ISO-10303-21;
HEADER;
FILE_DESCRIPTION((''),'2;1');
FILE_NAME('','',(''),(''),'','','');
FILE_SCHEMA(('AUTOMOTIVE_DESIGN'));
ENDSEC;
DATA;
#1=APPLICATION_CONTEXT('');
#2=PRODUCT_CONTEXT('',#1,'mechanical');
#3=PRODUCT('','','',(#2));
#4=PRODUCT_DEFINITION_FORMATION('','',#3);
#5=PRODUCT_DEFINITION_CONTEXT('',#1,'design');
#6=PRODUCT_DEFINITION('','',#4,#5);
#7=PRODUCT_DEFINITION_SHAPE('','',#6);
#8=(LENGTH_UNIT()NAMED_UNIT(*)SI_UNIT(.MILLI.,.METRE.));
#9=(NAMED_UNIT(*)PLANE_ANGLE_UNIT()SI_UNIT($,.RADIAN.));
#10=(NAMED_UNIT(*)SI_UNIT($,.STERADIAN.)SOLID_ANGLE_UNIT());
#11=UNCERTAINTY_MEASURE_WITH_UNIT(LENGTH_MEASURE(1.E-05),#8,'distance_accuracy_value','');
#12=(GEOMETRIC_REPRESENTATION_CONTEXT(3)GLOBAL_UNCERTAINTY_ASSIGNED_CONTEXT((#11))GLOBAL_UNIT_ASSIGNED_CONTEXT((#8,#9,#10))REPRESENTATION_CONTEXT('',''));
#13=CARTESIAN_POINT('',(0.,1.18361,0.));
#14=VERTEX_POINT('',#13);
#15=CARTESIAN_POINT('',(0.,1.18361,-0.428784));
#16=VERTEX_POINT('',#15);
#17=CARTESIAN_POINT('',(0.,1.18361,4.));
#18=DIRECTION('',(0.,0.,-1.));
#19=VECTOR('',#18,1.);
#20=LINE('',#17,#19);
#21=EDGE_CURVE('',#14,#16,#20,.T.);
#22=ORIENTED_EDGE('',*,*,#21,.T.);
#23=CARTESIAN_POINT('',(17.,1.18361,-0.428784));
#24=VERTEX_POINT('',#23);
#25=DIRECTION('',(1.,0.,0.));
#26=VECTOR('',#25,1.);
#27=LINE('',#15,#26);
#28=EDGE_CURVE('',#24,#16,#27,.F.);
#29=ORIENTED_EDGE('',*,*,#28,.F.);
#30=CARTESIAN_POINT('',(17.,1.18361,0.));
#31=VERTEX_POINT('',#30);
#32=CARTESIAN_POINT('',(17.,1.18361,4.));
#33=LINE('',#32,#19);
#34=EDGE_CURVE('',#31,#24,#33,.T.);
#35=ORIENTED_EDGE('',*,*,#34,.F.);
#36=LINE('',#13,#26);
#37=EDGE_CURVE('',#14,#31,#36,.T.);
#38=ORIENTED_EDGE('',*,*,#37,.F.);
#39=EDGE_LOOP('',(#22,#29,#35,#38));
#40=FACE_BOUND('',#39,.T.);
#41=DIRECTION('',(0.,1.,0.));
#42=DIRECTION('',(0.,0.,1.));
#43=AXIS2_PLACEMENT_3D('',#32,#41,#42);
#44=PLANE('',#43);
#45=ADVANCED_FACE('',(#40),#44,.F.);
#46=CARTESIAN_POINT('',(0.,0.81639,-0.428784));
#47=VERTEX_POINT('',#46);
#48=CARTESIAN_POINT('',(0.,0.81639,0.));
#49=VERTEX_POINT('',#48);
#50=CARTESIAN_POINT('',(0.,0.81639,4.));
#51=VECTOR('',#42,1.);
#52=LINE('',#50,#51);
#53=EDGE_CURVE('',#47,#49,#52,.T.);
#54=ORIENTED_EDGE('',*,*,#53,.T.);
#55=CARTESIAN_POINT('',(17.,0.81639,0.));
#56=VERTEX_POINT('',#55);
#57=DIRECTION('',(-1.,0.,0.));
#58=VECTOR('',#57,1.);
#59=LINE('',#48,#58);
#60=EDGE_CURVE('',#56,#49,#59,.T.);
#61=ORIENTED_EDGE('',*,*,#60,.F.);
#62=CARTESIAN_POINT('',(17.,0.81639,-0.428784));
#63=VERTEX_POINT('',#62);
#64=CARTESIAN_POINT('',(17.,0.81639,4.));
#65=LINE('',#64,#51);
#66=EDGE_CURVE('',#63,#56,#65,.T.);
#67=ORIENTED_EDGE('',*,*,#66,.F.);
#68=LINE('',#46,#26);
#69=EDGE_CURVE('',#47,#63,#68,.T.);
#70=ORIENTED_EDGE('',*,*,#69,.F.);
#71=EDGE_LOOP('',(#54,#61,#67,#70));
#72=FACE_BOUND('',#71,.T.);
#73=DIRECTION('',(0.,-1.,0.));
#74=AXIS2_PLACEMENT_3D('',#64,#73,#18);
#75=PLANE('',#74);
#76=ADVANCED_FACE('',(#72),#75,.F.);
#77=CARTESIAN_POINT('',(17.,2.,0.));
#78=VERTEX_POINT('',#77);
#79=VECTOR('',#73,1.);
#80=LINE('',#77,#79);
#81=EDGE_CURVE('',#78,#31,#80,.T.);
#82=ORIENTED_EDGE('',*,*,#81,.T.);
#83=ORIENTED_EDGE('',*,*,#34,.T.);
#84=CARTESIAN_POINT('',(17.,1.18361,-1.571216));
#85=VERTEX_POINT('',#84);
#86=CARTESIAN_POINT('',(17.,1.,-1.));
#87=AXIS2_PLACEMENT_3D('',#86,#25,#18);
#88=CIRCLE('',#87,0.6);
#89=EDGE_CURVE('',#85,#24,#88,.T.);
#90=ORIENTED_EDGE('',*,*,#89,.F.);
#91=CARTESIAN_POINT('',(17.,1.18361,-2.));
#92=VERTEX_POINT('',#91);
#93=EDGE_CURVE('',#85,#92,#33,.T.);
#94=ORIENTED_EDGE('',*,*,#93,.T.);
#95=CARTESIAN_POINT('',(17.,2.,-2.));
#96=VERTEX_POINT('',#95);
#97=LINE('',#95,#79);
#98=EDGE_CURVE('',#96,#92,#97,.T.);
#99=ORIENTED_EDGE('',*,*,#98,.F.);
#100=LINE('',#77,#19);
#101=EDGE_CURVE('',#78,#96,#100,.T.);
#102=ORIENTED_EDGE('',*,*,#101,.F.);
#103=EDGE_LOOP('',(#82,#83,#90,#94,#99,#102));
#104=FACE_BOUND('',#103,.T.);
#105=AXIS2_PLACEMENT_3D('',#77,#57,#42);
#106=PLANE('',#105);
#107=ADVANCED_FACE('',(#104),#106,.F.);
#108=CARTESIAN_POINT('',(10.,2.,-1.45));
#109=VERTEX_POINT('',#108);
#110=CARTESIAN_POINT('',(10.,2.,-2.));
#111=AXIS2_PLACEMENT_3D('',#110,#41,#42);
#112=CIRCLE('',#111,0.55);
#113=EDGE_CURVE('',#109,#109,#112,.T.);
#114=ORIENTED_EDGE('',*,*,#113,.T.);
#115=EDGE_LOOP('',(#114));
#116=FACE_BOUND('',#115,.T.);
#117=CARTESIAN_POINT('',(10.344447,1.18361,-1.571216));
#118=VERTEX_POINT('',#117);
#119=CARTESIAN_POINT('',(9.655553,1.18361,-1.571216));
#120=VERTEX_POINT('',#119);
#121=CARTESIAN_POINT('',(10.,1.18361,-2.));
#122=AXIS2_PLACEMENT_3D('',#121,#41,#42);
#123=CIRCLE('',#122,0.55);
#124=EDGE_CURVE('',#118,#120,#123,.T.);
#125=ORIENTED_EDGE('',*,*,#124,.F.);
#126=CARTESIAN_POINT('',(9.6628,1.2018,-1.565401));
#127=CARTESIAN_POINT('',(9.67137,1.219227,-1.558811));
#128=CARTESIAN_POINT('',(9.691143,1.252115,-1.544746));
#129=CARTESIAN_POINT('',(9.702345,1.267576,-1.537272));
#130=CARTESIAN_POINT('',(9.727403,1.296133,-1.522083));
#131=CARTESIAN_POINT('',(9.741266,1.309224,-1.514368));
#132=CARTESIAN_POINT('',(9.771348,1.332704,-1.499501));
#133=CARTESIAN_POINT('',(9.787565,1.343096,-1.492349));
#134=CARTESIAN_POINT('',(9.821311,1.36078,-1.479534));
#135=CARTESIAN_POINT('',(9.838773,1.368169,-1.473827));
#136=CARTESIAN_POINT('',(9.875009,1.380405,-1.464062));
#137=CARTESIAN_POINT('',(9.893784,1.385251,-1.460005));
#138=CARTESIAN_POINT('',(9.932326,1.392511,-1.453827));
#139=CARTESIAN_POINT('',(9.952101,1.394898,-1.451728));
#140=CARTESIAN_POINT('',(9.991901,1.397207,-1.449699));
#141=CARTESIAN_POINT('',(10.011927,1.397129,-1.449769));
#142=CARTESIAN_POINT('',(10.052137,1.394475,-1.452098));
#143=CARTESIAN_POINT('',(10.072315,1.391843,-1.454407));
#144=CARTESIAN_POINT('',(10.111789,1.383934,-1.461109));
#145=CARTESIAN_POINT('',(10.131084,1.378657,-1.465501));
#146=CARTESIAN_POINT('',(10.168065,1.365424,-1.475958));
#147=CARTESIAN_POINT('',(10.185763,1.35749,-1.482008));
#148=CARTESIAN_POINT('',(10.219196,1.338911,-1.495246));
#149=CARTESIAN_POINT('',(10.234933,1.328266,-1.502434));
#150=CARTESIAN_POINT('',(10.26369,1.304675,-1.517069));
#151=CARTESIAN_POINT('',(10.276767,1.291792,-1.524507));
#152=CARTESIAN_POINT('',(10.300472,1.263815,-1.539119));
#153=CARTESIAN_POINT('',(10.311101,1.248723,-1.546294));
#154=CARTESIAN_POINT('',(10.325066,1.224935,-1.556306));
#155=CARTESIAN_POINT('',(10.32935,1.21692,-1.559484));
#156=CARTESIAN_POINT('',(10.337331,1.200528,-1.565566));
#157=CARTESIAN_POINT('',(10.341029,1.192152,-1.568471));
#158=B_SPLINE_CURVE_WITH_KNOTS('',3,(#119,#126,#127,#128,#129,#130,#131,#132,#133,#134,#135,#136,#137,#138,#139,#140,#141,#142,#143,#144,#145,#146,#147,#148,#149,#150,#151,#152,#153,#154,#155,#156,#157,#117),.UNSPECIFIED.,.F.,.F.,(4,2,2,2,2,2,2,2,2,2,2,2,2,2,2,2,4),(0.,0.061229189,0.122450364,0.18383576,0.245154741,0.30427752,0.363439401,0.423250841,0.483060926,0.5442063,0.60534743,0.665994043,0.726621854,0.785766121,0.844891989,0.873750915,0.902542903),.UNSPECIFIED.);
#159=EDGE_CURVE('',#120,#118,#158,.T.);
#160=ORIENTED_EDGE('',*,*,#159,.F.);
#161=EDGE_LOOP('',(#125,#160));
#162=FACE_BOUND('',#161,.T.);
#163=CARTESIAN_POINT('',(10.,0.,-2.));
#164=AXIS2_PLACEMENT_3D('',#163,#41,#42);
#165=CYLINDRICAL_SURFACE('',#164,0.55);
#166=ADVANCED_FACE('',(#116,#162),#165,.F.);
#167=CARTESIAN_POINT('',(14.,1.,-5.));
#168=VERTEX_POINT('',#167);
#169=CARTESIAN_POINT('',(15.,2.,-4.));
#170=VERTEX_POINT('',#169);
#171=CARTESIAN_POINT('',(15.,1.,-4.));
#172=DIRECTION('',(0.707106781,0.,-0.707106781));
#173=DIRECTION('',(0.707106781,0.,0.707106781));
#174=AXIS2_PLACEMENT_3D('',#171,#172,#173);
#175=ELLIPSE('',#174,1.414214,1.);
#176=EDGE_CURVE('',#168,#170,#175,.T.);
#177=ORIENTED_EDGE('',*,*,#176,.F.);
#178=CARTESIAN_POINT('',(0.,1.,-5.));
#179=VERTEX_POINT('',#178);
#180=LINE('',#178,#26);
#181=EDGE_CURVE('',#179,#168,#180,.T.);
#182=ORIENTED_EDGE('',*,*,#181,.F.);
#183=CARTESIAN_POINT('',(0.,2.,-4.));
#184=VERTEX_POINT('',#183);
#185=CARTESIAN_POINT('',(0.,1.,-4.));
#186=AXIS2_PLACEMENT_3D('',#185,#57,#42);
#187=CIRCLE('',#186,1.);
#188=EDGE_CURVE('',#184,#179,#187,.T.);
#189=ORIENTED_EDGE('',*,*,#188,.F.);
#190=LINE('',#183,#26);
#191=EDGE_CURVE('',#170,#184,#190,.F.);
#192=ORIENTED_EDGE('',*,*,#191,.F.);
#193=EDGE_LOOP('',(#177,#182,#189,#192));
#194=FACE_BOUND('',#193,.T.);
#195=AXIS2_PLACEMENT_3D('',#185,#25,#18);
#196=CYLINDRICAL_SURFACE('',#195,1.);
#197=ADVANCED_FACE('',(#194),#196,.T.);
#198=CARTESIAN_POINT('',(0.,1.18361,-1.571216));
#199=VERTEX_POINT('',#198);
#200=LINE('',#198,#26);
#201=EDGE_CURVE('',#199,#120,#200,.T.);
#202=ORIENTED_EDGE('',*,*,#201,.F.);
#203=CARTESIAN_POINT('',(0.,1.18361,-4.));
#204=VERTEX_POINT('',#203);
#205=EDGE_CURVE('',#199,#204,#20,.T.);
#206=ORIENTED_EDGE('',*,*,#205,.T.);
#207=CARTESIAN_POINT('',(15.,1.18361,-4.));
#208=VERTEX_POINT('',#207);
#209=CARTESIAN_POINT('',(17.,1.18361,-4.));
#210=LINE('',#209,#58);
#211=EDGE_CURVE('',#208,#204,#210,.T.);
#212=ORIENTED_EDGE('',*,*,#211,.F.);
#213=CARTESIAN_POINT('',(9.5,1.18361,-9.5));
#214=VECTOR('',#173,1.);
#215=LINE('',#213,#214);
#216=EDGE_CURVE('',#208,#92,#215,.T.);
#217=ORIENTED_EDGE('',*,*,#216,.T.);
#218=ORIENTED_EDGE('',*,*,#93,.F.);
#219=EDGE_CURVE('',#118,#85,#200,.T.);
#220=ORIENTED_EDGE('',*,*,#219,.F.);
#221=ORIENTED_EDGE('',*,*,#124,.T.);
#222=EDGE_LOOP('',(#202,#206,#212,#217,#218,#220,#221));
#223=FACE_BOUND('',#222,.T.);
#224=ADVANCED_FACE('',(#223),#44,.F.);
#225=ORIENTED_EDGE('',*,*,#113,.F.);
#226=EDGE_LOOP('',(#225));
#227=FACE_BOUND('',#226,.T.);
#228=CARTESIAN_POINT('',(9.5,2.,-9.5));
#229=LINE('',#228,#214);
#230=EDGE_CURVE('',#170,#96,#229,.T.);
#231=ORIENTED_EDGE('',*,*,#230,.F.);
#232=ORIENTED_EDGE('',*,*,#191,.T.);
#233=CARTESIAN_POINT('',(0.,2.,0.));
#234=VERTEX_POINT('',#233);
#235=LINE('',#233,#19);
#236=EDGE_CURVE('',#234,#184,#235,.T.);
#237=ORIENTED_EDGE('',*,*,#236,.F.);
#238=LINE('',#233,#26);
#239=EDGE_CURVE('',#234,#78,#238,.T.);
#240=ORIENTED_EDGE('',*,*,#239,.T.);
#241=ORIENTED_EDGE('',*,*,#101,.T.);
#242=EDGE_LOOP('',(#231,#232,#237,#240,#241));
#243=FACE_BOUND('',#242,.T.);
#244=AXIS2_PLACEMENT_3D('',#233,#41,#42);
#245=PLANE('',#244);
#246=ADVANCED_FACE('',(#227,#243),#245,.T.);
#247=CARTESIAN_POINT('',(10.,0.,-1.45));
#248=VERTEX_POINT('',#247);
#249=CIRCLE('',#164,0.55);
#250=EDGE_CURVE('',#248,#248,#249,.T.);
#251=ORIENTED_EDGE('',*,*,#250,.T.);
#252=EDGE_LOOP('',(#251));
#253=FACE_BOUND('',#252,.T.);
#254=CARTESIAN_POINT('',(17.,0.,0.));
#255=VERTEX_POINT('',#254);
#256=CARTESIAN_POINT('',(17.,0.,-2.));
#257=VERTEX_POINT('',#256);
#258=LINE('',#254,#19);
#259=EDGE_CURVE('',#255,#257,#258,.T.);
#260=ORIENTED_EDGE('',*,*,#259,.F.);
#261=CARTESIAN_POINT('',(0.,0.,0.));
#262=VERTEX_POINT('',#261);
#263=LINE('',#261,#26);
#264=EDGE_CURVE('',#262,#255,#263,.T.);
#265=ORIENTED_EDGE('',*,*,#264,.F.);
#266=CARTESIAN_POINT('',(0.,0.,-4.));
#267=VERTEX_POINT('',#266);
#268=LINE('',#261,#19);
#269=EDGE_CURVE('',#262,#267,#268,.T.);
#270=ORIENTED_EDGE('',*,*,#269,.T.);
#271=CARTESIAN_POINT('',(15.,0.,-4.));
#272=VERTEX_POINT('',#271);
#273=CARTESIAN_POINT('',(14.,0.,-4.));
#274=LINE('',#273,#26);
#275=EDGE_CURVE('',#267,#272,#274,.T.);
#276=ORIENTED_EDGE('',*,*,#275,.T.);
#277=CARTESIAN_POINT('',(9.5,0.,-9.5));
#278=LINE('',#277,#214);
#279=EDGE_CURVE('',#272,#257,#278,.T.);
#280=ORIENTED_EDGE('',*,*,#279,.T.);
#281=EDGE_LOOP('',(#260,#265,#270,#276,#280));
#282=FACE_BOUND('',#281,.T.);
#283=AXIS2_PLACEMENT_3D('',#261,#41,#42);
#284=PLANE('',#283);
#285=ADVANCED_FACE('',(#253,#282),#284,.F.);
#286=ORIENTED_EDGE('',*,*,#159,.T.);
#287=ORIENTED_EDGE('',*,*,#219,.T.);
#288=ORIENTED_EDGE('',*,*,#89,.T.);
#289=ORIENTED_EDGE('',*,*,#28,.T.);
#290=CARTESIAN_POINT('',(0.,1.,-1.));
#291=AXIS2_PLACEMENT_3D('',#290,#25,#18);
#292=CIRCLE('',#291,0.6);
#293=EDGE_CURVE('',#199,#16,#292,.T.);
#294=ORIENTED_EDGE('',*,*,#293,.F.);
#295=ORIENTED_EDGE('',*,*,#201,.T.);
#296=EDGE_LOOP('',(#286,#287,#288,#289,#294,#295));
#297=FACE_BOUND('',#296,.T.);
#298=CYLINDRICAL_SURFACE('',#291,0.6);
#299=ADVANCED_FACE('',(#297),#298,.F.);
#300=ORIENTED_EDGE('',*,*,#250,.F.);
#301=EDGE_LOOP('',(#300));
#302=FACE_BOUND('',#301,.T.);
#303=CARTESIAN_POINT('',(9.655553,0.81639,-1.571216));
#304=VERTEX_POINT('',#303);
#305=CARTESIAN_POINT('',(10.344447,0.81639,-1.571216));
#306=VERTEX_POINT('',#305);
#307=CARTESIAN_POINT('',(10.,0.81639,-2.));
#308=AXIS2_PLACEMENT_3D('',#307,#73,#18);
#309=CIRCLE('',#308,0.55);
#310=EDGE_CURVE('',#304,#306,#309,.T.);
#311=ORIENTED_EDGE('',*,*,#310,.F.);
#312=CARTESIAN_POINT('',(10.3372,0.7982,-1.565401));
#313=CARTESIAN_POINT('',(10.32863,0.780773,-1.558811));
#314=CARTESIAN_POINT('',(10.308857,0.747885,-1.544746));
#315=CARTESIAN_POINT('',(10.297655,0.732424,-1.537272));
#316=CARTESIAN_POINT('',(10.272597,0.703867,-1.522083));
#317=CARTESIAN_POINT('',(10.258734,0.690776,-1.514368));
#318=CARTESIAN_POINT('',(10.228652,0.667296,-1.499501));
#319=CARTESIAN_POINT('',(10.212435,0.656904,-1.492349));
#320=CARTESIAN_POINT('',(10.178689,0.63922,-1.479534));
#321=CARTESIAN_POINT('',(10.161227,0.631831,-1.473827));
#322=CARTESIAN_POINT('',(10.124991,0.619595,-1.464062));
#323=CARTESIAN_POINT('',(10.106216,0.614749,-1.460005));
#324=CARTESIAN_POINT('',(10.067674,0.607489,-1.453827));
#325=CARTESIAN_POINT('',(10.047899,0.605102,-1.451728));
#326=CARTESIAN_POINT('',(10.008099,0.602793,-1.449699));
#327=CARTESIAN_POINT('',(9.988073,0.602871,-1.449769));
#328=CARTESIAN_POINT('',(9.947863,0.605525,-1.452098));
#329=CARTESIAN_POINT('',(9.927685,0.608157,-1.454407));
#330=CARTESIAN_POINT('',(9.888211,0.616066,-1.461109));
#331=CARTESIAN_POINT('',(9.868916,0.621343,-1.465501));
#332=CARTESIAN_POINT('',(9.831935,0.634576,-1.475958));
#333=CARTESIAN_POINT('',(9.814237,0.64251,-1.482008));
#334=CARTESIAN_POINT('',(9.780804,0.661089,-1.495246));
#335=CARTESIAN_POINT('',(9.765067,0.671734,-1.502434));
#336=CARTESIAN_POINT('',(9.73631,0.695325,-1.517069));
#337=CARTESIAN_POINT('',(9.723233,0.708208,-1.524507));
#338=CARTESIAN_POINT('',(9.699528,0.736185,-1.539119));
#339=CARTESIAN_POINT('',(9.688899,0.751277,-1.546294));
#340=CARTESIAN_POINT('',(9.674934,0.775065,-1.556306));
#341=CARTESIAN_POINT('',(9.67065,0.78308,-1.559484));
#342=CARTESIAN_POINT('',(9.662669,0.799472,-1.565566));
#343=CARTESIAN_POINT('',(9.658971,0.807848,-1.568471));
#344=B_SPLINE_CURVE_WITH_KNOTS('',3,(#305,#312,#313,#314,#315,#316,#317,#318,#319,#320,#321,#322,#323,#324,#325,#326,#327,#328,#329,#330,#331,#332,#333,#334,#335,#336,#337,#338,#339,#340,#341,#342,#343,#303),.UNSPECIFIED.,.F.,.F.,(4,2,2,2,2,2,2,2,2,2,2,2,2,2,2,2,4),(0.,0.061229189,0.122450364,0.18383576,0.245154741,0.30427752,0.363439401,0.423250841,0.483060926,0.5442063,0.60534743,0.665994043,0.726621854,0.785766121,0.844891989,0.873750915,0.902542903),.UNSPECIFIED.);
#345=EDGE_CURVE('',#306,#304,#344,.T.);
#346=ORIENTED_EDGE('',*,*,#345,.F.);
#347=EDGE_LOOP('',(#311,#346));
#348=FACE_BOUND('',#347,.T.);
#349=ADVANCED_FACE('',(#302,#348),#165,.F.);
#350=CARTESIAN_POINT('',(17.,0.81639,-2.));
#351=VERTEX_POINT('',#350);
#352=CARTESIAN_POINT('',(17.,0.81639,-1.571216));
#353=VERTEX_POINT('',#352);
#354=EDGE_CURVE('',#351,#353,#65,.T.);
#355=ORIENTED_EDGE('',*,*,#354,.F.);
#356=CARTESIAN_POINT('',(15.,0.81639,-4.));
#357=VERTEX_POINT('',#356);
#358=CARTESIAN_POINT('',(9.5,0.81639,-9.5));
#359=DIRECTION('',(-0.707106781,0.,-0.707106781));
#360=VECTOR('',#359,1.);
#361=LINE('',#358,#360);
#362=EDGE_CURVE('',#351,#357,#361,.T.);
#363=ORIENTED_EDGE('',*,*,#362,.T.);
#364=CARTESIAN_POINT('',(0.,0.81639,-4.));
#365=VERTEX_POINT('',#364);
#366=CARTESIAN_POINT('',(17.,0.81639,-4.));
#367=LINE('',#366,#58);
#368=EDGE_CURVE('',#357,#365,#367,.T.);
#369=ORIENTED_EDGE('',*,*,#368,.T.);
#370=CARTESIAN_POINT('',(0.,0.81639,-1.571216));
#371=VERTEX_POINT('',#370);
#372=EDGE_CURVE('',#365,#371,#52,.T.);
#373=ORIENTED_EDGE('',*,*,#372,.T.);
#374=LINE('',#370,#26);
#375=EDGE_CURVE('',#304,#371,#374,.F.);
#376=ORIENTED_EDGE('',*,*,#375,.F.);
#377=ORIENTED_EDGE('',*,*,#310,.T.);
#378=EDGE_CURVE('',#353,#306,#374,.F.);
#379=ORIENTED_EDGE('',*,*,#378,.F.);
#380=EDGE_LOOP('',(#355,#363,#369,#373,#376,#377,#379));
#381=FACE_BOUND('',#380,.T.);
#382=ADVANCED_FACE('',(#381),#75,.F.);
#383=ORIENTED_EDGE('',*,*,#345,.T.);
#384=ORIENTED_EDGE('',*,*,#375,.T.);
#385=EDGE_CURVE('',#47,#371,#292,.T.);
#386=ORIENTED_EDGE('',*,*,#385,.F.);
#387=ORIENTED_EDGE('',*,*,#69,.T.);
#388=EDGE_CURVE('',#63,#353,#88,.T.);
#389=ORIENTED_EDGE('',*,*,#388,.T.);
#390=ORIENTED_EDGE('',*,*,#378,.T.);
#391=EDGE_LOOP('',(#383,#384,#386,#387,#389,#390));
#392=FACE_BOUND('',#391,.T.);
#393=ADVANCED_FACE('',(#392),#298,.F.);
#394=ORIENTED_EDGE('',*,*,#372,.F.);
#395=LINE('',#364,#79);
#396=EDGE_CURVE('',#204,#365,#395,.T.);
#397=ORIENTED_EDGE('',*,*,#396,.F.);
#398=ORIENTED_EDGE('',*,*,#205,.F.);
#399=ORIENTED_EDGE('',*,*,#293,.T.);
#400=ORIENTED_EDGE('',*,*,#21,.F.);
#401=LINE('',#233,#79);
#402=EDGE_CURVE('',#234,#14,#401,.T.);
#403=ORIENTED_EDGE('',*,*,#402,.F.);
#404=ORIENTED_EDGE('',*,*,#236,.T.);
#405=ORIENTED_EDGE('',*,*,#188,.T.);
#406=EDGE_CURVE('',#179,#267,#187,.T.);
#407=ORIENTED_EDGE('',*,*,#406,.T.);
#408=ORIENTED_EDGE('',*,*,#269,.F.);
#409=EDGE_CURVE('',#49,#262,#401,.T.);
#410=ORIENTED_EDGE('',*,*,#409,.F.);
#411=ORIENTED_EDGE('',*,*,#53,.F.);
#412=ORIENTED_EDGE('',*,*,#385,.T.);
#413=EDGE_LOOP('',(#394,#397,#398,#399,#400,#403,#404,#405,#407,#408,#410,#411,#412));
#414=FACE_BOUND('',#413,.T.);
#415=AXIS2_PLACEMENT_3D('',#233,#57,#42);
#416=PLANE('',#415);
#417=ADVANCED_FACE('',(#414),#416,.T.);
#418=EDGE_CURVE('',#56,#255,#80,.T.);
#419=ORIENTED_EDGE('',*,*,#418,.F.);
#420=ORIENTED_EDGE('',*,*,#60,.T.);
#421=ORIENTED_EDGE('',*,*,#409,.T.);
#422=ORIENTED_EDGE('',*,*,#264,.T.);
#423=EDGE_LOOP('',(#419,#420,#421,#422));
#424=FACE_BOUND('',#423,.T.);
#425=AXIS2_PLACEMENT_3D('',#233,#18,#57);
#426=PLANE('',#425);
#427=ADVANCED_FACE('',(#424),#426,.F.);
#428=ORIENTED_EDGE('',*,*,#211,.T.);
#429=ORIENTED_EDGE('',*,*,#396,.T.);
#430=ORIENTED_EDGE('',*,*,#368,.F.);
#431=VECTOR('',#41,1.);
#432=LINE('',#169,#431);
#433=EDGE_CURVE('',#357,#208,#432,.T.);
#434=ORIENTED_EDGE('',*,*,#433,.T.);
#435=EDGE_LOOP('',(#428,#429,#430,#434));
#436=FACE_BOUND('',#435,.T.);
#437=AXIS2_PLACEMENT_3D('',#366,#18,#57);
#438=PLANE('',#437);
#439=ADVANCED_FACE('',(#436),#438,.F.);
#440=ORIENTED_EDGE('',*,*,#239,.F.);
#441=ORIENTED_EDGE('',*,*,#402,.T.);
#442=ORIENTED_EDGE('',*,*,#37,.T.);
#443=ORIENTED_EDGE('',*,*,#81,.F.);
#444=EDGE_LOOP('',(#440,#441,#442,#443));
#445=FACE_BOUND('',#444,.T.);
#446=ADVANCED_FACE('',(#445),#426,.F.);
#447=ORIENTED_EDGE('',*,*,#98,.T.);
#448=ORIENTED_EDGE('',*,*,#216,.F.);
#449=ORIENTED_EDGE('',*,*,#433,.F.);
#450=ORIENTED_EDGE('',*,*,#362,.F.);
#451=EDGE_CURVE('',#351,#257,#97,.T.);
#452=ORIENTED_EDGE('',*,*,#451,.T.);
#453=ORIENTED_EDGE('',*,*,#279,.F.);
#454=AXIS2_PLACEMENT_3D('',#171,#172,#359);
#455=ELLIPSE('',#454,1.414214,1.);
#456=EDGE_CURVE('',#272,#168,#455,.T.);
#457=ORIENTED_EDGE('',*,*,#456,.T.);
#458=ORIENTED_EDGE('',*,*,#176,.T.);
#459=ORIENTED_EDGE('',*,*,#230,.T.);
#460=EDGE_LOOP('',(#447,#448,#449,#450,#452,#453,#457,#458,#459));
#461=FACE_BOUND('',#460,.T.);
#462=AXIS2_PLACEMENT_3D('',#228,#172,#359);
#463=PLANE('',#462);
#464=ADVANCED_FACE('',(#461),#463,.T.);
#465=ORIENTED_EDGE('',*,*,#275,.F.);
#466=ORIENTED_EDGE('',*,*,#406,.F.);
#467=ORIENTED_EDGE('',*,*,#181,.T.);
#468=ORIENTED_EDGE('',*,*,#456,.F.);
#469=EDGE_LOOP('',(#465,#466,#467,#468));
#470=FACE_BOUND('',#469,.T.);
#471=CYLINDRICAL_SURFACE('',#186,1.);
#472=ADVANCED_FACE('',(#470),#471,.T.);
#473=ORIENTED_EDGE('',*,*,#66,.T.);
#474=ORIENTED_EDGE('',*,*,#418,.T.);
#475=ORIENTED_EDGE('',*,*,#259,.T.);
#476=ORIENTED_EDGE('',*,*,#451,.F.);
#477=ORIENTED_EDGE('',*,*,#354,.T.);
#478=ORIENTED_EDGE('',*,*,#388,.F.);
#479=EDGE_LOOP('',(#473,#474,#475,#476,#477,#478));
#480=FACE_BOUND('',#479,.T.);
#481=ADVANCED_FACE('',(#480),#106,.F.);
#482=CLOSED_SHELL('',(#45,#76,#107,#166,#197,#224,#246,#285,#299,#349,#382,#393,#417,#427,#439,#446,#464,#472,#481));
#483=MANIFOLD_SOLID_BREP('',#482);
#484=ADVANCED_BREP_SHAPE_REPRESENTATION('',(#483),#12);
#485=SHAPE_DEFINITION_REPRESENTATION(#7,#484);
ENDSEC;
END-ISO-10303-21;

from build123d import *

# Parameters (mm, degrees)
EXTRUDE_1_DEPTH     = 2
SKETCH_2_R          = 0.6
CUT_EXTRUDE_1_DEPTH = 18.8325545
FILLET_1_R          = 1
SKETCH_3_W          = 8
SKETCH_3_H          = 0.367219666
CUT_EXTRUDE_2_DEPTH = 18.8325545
SKETCH_4_R          = 0.55
CUT_EXTRUDE_3_DEPTH = 18.8325545


with BuildPart() as part:
    # 草图1 → 凸台-拉伸1 (new body)
    with BuildSketch(Plane(origin=(0, 0, 0), x_dir=(1, 0, 0), z_dir=(0, 1, 0))):
        Polygon((17, 2), (14, 5), (0, 5), (0, 0), (17, 0), align=None)
    extrude(amount=EXTRUDE_1_DEPTH)

    # 草图2 → 切除-拉伸1 (cut, through all)
    with BuildSketch(Plane(origin=(17, 0, 0), x_dir=(0, 0, -1), z_dir=(1, 0, 0))):
        with Locations((1, 1)):
            Circle(SKETCH_2_R)
    extrude(amount=-CUT_EXTRUDE_1_DEPTH, mode=Mode.SUBTRACT)

    # 圆角1
    fillet_1_edges = [part.edges().sort_by_distance(p)[0] for p in [
        (7, 0, -5),
        (7, 2, -5),
    ]]
    fillet(fillet_1_edges, radius=FILLET_1_R - 0.0001)  # a hair under: the kernel refuses the full size

    # 草图3 → 切除-拉伸2 (cut, through all)
    with BuildSketch(Plane.ZY):
        with Locations((0, 1)):
            Rectangle(SKETCH_3_W, SKETCH_3_H)
    extrude(amount=-CUT_EXTRUDE_2_DEPTH, mode=Mode.SUBTRACT)

    # 草图4 → 切除-拉伸3 (cut, through all)
    with BuildSketch(Plane(origin=(0, 2, 0), x_dir=(1, 0, 0), z_dir=(0, 1, 0))):
        with Locations(Location((10, 2, 0), (0, 0, 270))):
            Circle(SKETCH_4_R)
    extrude(amount=-CUT_EXTRUDE_3_DEPTH, mode=Mode.SUBTRACT)


solid = part.part
